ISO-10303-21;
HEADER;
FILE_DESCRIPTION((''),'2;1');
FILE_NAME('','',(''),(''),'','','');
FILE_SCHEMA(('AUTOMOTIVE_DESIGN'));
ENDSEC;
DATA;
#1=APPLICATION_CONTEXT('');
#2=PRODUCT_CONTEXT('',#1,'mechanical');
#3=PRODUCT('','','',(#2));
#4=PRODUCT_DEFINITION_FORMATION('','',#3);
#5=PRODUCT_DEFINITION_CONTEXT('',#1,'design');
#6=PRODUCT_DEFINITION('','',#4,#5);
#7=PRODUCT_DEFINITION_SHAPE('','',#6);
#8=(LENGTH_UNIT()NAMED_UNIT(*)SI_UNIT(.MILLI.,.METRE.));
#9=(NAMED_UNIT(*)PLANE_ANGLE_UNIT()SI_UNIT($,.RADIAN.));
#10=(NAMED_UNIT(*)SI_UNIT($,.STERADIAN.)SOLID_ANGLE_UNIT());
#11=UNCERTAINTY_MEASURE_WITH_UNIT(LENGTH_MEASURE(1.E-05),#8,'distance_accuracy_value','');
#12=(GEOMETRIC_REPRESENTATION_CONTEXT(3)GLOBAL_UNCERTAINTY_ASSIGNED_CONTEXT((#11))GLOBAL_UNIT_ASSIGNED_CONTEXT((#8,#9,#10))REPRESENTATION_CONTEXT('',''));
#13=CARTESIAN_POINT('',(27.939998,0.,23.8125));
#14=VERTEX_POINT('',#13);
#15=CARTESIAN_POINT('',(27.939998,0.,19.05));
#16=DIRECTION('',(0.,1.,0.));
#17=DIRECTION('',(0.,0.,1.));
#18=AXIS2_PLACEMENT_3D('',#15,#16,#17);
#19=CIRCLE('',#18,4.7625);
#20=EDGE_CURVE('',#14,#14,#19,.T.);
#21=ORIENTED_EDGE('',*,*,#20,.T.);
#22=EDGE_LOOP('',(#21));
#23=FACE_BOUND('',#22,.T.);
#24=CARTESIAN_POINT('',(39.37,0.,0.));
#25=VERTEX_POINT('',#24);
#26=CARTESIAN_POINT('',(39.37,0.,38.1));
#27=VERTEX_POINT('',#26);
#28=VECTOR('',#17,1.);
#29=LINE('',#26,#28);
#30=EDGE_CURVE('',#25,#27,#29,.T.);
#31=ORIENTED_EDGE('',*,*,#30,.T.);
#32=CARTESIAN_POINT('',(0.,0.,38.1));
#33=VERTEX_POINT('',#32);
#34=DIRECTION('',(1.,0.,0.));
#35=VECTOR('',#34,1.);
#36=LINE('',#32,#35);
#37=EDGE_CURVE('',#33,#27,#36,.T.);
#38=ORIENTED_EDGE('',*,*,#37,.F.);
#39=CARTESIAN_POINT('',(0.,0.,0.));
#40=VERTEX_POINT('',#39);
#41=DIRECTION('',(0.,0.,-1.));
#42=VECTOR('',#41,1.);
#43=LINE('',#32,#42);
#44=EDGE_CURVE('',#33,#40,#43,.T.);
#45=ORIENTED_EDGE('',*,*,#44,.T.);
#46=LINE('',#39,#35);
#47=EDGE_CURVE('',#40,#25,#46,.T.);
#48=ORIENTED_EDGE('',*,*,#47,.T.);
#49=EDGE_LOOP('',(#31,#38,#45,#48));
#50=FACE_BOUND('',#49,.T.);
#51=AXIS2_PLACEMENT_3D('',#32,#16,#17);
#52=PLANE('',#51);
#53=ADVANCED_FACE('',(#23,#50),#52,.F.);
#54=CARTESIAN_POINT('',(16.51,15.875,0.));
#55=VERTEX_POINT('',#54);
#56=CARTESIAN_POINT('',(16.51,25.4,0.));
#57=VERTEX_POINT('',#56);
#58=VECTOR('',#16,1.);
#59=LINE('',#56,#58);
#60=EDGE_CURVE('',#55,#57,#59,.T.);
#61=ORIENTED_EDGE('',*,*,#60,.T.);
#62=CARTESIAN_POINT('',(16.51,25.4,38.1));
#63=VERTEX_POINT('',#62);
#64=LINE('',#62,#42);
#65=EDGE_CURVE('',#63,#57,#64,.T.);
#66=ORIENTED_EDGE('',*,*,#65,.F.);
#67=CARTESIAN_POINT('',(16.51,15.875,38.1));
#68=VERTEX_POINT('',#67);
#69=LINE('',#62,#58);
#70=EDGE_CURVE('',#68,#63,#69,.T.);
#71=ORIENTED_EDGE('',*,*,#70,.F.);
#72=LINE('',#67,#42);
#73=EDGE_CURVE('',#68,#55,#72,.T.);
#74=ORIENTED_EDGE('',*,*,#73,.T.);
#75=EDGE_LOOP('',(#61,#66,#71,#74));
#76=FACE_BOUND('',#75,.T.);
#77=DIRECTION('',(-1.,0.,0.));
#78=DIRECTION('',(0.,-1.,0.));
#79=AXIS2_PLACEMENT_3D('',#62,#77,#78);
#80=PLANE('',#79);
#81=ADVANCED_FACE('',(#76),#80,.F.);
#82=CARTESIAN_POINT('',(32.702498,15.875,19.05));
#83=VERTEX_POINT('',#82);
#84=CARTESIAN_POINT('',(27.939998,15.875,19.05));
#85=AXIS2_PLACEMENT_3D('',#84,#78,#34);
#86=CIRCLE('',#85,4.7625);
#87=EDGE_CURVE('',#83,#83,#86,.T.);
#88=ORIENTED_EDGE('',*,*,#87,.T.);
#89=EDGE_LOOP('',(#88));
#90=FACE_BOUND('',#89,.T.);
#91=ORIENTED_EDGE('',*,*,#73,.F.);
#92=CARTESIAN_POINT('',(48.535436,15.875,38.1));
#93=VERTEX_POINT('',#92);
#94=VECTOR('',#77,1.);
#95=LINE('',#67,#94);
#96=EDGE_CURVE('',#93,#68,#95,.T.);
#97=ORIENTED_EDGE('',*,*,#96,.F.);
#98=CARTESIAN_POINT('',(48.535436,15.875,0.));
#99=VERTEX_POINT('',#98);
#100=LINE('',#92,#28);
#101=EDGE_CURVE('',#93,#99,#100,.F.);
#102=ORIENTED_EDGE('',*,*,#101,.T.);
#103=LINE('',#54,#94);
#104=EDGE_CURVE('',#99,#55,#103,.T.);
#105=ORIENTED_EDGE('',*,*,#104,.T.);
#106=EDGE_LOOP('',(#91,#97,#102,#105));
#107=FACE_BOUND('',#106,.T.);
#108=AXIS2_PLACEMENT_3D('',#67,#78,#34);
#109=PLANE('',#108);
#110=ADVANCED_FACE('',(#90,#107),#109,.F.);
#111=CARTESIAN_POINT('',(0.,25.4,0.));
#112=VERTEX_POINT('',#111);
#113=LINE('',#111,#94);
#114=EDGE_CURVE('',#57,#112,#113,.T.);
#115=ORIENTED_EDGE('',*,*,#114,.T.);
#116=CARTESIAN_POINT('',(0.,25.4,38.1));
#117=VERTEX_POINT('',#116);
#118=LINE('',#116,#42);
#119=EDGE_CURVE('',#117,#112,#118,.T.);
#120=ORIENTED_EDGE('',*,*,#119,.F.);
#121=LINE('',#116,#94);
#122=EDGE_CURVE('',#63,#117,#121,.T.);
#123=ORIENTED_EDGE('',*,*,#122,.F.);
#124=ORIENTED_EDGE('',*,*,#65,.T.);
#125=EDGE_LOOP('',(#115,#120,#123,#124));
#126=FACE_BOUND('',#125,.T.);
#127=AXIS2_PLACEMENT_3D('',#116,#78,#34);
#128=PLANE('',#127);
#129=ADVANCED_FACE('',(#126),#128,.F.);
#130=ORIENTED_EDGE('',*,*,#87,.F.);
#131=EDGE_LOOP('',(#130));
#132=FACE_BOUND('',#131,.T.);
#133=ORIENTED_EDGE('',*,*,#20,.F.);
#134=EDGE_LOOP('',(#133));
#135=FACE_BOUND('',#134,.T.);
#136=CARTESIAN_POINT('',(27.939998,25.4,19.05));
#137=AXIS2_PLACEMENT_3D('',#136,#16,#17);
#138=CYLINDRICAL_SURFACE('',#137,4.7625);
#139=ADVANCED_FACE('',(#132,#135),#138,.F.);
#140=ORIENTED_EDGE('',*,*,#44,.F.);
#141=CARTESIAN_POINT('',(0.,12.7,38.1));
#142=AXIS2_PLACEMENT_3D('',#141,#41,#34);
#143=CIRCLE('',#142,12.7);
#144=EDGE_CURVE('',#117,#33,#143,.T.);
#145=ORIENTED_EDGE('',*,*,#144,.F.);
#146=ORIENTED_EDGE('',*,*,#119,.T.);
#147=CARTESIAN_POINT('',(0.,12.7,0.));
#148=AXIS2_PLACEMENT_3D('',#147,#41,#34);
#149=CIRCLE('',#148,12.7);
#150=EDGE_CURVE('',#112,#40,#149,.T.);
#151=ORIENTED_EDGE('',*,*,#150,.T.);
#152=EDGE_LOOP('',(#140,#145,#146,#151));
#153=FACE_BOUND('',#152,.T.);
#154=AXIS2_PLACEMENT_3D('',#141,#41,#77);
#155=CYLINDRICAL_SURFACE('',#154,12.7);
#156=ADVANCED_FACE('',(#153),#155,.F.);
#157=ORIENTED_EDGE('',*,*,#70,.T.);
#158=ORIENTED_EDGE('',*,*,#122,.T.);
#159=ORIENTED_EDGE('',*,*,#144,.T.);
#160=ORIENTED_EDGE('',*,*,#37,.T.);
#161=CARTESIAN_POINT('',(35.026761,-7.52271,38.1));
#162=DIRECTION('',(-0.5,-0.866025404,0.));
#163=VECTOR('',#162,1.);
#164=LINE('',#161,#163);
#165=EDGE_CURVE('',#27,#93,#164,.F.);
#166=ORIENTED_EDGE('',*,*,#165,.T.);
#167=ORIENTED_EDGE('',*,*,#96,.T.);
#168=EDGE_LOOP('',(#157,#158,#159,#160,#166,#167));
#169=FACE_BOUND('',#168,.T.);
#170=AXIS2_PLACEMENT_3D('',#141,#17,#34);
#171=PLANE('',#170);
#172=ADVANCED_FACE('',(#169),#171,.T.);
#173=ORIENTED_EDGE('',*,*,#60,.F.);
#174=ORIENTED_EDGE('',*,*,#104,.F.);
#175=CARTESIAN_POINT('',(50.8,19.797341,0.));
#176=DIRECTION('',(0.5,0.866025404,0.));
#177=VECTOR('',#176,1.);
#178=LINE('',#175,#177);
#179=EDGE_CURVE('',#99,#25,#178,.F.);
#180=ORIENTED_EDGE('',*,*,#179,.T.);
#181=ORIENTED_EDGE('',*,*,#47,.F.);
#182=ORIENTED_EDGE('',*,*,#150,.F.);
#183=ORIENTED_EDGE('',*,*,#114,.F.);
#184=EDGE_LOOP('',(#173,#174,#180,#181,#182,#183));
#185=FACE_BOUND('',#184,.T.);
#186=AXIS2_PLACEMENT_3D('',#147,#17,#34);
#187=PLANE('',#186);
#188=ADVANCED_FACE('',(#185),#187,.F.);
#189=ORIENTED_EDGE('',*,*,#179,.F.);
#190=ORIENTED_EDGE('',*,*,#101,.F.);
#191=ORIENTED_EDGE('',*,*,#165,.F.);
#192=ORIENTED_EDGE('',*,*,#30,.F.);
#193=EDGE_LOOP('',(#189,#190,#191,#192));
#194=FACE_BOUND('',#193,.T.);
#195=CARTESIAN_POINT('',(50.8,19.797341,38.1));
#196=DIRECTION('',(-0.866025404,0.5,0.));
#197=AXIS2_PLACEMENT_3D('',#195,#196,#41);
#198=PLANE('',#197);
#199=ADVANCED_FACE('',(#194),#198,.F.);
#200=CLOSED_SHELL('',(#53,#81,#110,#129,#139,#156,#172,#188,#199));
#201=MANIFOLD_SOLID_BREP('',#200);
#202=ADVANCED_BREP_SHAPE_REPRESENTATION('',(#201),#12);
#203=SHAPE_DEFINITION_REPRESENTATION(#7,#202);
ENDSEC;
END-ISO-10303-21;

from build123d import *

# Parameters (mm, degrees)
BOSS_EXTRUDE1_DEPTH          = 38.1
CHAMFER1_SIZE                = 11.43
CHAMFER1_SIZE_2              = 19.797340731
F_3_8_0_375_DIAMETER_HOLE1_D = 9.525


with BuildPart() as part:
    # Sketch1 → Boss-Extrude1 (new body)
    with BuildSketch(Plane.XY):
        with BuildLine():
            Line((0, 0), (50.8, 0))
            Line((50.8, 0), (50.8, 15.875))
            Line((50.8, 15.875), (16.51, 15.875))
            Line((16.51, 15.875), (16.51, 25.4))
            Line((16.51, 25.4), (0, 25.4))
            ThreePointArc((0, 25.4), (12.7, 12.7), (0, 0))
        make_face()
    extrude(amount=BOSS_EXTRUDE1_DEPTH)

    # Chamfer1
    # the kernel refuses this chamfer: 19.797340731, 11.43 mm, written as the material it takes off along each edge
    with BuildSketch(Plane(origin=(50.8, 0, -51.217418184), x_dir=(-0.9983227437537926, -0.05789386240267138, 0), z_dir=(0, 0, 1))) as chamfer1_piece_1:
        Polygon((CHAMFER1_SIZE * 0.998322743754, -CHAMFER1_SIZE * 0.0578938624027), (-CHAMFER1_SIZE_2 * 0.0578938624012, -CHAMFER1_SIZE_2 * 0.998322743729), (0, 0), align=None)
    extrude(amount=140.534836368, mode=Mode.SUBTRACT)

    # 3/8 (0.375) Diameter Hole1 (through all)
    with Locations(Plane(origin=(0, 25.4, 0), x_dir=(1, 0, 0), z_dir=(0, 1, 0))):
        with Locations((27.939997923, -19.05)):
            Hole(F_3_8_0_375_DIAMETER_HOLE1_D / 2)


solid = part.part
